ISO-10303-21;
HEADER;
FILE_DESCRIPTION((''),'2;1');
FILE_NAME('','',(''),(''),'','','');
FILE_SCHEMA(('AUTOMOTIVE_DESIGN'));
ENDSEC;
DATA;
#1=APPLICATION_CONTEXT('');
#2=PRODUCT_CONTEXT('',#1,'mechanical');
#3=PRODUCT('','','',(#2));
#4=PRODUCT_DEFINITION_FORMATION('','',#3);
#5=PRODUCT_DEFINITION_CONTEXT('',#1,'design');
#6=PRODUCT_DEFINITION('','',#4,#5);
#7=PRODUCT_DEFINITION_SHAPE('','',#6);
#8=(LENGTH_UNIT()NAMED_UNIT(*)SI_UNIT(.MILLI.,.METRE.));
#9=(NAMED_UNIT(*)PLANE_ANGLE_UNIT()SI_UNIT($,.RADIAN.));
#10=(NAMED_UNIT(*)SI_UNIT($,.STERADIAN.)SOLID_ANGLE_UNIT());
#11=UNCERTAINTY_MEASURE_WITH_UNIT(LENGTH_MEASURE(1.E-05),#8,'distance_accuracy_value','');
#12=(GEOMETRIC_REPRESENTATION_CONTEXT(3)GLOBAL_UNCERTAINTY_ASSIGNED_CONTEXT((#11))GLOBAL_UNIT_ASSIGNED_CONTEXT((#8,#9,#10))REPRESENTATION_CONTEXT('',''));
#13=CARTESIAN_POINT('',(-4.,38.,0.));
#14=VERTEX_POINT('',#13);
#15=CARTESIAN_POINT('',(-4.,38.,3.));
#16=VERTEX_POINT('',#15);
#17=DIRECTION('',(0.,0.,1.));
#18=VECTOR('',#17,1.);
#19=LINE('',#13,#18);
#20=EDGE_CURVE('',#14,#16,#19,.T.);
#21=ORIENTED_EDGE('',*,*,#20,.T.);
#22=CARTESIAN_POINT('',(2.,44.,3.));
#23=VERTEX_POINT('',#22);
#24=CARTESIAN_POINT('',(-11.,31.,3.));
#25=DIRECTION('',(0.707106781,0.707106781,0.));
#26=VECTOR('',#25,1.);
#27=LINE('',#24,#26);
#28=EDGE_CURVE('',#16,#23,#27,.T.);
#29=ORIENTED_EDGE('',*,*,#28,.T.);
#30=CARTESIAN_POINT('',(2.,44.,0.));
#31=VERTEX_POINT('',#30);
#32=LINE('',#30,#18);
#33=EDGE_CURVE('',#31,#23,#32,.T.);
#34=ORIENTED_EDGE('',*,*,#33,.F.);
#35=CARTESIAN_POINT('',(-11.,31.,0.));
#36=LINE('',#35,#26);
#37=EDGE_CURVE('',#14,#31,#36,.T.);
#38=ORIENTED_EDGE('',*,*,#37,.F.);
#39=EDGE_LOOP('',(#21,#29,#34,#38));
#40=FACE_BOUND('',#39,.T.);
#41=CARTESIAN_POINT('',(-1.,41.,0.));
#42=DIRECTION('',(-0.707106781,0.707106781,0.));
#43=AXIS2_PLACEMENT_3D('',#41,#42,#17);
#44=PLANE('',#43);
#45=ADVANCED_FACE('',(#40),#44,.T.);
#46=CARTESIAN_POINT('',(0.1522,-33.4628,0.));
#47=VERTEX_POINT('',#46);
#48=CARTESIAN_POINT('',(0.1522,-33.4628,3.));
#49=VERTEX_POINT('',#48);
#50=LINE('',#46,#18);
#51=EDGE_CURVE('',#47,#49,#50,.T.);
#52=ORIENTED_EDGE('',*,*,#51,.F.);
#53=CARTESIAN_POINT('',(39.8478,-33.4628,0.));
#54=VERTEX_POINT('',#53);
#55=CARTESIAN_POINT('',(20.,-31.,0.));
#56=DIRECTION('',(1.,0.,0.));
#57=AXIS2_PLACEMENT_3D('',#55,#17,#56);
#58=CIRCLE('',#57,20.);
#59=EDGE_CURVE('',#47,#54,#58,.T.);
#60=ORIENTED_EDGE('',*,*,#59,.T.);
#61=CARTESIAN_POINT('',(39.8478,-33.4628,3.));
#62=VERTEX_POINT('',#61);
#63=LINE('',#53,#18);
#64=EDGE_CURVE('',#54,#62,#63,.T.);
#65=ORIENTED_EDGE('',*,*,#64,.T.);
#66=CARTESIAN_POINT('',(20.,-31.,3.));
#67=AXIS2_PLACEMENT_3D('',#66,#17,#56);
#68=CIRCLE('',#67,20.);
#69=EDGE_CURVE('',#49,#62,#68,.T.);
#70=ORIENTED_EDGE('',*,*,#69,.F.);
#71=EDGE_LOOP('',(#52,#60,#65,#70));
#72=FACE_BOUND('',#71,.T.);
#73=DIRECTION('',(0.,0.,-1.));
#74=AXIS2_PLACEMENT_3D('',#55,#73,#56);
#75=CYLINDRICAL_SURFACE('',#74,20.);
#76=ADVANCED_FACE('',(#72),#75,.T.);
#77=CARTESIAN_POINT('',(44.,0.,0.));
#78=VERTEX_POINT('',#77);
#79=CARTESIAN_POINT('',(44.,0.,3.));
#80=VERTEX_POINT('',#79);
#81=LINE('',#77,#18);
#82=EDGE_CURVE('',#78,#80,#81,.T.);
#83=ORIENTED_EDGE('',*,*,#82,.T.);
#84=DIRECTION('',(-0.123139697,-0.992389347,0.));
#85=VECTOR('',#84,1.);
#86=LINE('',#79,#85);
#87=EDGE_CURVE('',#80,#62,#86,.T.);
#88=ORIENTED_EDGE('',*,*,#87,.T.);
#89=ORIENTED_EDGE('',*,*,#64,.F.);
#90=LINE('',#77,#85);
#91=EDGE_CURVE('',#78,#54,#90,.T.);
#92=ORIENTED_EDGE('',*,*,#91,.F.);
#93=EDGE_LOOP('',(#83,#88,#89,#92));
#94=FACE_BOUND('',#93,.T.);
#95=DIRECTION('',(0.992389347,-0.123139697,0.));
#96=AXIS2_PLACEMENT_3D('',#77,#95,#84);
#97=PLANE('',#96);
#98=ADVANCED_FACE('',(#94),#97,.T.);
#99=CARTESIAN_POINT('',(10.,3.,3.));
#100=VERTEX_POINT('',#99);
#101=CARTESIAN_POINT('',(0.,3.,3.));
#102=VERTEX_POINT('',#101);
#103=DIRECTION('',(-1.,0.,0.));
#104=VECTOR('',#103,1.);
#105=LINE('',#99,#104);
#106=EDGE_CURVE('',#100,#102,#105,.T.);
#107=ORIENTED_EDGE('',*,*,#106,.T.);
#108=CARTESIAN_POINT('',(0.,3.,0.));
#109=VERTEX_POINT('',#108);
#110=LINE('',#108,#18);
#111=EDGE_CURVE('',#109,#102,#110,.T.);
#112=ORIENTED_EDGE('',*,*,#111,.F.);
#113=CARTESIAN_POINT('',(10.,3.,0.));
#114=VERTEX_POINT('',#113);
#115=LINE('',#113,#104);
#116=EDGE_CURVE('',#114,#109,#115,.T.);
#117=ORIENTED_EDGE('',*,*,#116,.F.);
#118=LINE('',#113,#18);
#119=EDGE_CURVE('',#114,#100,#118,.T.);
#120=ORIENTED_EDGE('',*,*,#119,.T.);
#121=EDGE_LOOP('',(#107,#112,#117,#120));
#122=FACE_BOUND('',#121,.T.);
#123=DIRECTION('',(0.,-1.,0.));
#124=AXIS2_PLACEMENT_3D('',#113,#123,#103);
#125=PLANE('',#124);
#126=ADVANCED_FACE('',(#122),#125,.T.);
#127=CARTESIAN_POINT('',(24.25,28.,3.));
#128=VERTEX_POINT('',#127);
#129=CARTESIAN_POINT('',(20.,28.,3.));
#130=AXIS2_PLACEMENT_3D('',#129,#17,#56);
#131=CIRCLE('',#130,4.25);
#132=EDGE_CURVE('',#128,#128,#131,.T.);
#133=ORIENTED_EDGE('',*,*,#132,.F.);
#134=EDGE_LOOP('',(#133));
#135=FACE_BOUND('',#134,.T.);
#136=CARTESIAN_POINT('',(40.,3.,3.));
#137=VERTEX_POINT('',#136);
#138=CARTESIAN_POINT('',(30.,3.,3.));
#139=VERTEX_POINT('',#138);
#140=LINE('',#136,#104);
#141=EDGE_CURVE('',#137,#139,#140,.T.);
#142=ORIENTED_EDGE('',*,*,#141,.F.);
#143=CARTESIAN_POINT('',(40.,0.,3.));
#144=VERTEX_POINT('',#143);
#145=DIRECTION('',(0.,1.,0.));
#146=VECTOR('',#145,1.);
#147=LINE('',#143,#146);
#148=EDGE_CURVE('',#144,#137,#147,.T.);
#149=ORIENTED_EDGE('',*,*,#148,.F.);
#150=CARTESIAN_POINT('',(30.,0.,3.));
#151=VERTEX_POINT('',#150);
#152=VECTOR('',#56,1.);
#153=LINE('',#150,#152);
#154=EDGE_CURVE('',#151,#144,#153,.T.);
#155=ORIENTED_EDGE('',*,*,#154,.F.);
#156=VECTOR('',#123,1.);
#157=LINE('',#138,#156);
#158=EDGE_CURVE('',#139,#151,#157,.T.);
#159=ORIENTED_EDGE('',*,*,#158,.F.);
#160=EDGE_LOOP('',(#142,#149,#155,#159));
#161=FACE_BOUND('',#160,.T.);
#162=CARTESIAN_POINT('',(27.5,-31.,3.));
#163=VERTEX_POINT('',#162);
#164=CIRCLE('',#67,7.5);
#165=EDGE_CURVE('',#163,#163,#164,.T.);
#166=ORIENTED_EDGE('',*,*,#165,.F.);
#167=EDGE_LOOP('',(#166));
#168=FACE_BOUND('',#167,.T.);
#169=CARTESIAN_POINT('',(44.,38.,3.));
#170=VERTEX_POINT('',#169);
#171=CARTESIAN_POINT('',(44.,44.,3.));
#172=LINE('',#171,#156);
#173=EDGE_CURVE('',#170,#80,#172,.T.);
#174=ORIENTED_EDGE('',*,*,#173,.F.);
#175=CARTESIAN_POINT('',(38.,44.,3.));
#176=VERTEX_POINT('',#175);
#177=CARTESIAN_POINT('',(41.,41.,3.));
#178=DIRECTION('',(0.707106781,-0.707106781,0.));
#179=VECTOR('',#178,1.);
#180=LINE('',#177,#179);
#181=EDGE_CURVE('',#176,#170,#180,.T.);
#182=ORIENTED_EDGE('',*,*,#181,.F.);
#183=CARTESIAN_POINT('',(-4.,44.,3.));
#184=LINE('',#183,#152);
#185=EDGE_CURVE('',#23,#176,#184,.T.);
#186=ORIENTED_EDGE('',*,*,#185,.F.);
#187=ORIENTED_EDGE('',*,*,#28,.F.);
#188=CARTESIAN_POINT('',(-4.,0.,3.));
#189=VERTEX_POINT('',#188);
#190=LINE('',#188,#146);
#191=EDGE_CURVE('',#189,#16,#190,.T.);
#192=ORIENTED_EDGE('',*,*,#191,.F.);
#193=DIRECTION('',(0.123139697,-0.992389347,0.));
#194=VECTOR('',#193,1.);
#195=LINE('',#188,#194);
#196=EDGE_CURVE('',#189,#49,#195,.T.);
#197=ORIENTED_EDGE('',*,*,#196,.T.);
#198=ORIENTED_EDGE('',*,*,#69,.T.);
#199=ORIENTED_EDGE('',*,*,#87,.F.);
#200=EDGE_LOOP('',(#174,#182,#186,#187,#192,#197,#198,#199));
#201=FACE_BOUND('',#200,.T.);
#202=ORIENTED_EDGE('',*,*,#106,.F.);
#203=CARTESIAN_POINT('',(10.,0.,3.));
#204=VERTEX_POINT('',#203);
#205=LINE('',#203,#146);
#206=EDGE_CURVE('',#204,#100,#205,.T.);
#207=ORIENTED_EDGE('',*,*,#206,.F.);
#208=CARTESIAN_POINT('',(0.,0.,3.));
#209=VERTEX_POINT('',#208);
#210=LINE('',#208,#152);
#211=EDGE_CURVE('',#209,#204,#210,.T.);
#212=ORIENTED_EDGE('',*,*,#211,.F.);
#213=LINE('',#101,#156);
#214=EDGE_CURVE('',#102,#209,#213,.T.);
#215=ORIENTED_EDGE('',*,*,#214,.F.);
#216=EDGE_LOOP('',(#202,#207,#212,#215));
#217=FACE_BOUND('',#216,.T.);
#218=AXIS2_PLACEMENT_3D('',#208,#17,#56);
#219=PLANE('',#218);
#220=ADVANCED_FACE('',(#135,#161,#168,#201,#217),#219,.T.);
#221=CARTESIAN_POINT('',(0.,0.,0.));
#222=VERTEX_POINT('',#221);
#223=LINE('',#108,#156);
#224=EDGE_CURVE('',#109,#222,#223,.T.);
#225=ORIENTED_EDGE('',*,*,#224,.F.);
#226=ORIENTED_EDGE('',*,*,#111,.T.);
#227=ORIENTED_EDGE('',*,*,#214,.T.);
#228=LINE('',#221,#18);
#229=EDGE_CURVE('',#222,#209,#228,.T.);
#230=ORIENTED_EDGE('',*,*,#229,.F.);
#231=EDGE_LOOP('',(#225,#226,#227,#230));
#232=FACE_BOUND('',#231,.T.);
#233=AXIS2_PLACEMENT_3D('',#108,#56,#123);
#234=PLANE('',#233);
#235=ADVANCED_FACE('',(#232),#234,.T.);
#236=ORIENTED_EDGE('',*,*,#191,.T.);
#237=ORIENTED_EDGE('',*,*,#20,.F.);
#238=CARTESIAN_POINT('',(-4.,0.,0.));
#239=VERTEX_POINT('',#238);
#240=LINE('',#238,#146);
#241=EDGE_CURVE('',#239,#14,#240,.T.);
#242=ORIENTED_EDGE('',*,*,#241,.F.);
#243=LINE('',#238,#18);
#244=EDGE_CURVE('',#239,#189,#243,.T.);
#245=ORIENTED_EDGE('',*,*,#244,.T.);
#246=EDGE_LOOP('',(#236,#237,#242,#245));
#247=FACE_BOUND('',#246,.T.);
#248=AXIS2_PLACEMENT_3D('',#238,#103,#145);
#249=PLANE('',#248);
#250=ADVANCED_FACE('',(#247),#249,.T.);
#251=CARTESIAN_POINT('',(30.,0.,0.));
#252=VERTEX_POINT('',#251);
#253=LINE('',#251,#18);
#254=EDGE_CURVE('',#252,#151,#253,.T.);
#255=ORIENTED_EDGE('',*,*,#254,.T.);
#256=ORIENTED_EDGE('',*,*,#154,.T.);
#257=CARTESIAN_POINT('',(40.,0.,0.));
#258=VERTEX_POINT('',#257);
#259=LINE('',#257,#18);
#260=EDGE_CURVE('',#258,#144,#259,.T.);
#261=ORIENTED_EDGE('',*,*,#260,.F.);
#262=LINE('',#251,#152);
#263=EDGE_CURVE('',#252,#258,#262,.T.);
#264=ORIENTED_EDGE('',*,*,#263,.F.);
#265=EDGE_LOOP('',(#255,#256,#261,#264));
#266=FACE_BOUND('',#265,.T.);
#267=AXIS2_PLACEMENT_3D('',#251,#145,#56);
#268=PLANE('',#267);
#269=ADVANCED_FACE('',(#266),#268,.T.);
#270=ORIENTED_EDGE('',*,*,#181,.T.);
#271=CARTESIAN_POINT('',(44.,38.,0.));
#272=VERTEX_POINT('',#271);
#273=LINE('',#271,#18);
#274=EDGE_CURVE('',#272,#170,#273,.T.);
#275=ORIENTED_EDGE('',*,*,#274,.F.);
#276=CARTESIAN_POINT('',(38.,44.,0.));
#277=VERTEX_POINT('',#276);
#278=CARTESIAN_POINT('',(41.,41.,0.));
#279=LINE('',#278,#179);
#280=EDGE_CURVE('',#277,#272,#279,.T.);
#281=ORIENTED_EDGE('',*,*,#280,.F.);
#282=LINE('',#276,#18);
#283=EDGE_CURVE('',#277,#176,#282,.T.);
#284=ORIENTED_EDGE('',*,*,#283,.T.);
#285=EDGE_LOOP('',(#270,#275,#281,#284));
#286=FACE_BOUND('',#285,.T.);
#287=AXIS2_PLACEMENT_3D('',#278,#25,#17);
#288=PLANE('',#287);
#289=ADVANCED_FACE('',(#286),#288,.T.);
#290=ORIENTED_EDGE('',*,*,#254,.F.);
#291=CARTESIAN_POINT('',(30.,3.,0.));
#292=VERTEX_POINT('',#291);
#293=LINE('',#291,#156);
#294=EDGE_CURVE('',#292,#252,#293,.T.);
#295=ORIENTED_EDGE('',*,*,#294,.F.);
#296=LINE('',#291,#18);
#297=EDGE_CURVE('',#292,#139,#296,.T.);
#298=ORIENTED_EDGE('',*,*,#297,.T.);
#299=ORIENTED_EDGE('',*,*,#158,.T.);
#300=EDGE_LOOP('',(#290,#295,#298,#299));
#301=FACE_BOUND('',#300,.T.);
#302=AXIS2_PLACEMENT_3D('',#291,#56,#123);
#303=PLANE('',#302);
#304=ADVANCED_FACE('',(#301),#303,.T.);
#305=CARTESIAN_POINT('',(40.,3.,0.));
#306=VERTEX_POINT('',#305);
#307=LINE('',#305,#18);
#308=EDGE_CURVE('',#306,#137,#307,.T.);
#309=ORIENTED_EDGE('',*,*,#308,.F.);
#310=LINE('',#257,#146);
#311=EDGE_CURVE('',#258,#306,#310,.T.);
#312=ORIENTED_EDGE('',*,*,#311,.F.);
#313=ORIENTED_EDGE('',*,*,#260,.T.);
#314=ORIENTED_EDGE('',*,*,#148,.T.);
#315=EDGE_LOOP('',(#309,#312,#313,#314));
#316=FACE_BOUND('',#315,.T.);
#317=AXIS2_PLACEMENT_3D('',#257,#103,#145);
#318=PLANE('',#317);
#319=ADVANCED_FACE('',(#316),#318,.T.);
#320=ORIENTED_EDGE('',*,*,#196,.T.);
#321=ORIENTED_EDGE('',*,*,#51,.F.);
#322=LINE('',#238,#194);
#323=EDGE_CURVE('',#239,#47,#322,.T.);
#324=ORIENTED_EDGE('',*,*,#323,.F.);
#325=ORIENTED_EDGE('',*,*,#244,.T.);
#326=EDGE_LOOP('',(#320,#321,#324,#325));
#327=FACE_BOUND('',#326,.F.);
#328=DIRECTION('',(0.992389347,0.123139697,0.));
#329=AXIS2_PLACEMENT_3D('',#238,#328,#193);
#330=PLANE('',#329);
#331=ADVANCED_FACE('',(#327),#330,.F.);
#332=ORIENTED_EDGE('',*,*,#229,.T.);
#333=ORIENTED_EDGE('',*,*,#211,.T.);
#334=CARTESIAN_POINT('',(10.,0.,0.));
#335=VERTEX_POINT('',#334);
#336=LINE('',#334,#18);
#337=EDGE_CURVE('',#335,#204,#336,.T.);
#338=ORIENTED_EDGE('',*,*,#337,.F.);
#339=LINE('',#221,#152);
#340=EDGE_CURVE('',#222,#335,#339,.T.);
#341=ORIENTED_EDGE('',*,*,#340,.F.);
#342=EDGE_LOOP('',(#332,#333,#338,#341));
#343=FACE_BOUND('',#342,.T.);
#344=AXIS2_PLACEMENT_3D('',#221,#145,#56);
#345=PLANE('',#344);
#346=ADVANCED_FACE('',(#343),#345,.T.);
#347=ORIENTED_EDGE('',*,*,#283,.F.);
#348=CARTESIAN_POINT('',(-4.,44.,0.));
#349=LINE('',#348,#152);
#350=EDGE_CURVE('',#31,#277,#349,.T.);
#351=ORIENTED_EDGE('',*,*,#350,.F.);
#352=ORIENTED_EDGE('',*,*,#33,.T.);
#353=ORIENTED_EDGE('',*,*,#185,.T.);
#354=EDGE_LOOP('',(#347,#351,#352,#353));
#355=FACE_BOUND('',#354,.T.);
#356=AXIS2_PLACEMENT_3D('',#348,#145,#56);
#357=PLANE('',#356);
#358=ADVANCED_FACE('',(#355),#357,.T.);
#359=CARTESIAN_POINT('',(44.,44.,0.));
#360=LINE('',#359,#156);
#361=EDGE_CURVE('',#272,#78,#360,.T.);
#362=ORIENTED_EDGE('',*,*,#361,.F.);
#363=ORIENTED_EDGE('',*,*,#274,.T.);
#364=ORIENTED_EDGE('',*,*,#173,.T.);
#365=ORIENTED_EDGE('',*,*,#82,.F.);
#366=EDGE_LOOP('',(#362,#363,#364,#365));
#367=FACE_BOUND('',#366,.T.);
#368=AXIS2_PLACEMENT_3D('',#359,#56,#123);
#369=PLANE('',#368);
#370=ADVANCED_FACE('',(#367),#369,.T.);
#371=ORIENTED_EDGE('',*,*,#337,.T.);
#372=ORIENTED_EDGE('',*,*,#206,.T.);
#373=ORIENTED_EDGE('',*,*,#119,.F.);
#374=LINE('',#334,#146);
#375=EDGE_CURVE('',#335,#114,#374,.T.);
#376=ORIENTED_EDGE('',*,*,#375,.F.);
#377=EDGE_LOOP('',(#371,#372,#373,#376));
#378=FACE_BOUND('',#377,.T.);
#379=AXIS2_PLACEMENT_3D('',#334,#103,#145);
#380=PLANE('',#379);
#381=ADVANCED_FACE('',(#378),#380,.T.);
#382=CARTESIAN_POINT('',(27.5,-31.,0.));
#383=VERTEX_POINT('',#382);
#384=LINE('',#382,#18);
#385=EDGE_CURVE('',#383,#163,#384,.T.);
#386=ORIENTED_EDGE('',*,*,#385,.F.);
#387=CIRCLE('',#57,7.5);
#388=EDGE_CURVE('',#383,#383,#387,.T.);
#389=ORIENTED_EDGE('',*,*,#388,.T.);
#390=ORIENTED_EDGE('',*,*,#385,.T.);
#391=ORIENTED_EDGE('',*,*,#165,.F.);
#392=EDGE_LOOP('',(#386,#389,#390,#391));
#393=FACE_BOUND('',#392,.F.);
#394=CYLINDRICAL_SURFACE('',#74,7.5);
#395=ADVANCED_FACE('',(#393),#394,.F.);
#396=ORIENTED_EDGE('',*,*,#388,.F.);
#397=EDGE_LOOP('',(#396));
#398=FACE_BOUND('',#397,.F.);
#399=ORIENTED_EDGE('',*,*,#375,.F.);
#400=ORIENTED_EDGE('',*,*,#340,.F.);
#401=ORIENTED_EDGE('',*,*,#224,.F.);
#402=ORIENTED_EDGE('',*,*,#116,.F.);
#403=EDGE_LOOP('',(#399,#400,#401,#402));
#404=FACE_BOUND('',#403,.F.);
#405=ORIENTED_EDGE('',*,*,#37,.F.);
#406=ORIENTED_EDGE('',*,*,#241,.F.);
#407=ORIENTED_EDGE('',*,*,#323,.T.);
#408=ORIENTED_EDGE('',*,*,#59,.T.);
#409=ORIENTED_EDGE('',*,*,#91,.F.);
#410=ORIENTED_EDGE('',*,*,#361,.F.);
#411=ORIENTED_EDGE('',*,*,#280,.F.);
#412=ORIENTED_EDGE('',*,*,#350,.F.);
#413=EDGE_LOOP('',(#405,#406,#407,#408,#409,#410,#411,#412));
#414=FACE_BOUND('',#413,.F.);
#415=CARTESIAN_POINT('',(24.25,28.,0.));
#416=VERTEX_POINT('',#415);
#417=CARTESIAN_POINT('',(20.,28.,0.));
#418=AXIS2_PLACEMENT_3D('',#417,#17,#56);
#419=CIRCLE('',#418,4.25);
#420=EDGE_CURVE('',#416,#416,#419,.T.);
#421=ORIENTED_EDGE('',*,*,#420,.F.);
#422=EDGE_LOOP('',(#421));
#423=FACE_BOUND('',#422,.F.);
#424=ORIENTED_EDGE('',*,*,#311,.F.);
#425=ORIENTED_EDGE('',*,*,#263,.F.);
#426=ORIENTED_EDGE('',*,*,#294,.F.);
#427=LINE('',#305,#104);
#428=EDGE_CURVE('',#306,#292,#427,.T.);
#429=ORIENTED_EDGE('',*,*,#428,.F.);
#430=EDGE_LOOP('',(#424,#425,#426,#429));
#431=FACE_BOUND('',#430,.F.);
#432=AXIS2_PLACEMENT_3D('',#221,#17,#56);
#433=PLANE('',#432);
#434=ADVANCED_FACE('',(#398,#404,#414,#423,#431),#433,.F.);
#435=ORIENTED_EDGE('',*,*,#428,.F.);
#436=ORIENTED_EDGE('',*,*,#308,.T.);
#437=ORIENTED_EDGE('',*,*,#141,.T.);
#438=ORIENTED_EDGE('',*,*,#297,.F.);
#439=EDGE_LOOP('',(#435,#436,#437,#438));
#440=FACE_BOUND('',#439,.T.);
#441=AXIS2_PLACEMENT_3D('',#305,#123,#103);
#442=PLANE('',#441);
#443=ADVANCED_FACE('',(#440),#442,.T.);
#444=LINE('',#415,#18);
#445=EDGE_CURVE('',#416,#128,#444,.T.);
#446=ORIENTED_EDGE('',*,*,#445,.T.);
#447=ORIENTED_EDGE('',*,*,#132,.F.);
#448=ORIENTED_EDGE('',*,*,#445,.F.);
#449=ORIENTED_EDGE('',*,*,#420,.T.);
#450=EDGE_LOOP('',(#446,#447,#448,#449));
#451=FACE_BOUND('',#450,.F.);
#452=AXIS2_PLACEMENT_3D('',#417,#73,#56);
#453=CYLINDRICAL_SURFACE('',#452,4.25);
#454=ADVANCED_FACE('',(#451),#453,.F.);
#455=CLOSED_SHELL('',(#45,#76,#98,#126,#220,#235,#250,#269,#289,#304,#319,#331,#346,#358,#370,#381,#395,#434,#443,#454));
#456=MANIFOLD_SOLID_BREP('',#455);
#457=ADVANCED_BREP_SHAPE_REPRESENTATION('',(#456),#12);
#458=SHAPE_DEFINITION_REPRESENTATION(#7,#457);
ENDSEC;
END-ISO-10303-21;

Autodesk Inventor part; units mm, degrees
ref_plane "YZ Plane" through (0, 0, 0) normal (1, 0, 0) x (0, 1, 0)
ref_plane "XZ Plane" through (0, 0, 0) normal (0, 1, 0) x (-1, 0, 0)
ref_plane "XY Plane" through (0, 0, 0) normal (0, 0, 1) x (1, 0, 0)
sketch "Sketch1" plane through (0, 0, 0) normal (0, 0, 1) x (1, 0, 0)
  line L0 (0, 0) -> (10, 0)
  line L1 (10, 0) -> (10, 3)
  line L2 (10, 3) -> (0, 3)
  line L3 (0, 3) -> (0, 0)
  line L4 (30, 0) -> (40, 0)
  line L5 (40, 0) -> (40, 3)
  line L6 (40, 3) -> (30, 3)
  line L7 (30, 3) -> (30, 0)
  line L8 (0, 0) -> (40, 0)
  line L9 (40, 0) -> (40, 40)
  line L10 (40, 40) -> (0, 40)
  line L11 (0, 40) -> (0, 0)
  circle A0 centre (20, -31) radius 7.5
  circle A1 centre (20, -31) radius 20
  line L12 (-4, 44) -> (44, 44)
  line L13 (44, 44) -> (44, 0)
  line L14 (44, 0) -> (-4, 0)
  line L15 (-4, 0) -> (-4, 44)
  line L16 (-4, 0) -> (0.1522, -33.4628)
  line L17 (44, 0) -> (39.8478, -33.4628)
  circle A2 centre (20, 28) radius 4.25
  line L18 (10, 3) -> (30, 3)
  point P0 (20, 0)
  point P1 (1.3083, -38.1147)
  point P2 (38.6917, -38.1147)
  point P3 (30, 1.3205)
  point P4 (10, 1.3205)
  point P5 (8, 0)
  point P6 (32, 0)
  dimension "d0" = 10
  dimension "d1" = 3
  dimension "d2" = 10
  dimension "d3" = 20
  dimension "d4" = 40
  dimension "d5" = 15
  dimension "d6" = 40
  dimension "d7" = 31
  dimension "d9" = 4
  dimension "d10" = 4
  dimension "d11" = 4
  dimension "d12" = 8.5
  dimension "d17" = 25
extrude "Plate1" add sketch "Sketch1" along normal blind 3 contours L14 L15 L12 L13 L5 L9 L10 L11 L3 | L0 L8 L4 L14 L17 A1 L16 | L1 L18 L7 L8 | L11 L10 L9 L6 L18 L2 | A1
chamfer "Corner Chamfer1" distance 6 angle 45 2 edges at (-4, 44, 1.5) (44, 44, 1.5)
equation "\"d10\" = d9"
equation "\"d11\" = d10"
equation "\"d8\" = Thickness"
equation "\"BendRadius\" = Thickness"
equation "\"BendReliefWidth\" = Thickness"
equation "\"BendReliefDepth\" = 0.5 * Thickness"
equation "\"CornerReliefSize\" = 4 * Thickness"
equation "\"MinimumRemnant\" = 2 * Thickness"
equation "\"TransitionRadius\" = BendRadius"
equation "\"JacobiRadiusSize\" = BendRadius"
equation "\"GapSize\" = Thickness"
equation "\"Thickness\" = 3"
properties part number "A_beam_end_mound_2"
